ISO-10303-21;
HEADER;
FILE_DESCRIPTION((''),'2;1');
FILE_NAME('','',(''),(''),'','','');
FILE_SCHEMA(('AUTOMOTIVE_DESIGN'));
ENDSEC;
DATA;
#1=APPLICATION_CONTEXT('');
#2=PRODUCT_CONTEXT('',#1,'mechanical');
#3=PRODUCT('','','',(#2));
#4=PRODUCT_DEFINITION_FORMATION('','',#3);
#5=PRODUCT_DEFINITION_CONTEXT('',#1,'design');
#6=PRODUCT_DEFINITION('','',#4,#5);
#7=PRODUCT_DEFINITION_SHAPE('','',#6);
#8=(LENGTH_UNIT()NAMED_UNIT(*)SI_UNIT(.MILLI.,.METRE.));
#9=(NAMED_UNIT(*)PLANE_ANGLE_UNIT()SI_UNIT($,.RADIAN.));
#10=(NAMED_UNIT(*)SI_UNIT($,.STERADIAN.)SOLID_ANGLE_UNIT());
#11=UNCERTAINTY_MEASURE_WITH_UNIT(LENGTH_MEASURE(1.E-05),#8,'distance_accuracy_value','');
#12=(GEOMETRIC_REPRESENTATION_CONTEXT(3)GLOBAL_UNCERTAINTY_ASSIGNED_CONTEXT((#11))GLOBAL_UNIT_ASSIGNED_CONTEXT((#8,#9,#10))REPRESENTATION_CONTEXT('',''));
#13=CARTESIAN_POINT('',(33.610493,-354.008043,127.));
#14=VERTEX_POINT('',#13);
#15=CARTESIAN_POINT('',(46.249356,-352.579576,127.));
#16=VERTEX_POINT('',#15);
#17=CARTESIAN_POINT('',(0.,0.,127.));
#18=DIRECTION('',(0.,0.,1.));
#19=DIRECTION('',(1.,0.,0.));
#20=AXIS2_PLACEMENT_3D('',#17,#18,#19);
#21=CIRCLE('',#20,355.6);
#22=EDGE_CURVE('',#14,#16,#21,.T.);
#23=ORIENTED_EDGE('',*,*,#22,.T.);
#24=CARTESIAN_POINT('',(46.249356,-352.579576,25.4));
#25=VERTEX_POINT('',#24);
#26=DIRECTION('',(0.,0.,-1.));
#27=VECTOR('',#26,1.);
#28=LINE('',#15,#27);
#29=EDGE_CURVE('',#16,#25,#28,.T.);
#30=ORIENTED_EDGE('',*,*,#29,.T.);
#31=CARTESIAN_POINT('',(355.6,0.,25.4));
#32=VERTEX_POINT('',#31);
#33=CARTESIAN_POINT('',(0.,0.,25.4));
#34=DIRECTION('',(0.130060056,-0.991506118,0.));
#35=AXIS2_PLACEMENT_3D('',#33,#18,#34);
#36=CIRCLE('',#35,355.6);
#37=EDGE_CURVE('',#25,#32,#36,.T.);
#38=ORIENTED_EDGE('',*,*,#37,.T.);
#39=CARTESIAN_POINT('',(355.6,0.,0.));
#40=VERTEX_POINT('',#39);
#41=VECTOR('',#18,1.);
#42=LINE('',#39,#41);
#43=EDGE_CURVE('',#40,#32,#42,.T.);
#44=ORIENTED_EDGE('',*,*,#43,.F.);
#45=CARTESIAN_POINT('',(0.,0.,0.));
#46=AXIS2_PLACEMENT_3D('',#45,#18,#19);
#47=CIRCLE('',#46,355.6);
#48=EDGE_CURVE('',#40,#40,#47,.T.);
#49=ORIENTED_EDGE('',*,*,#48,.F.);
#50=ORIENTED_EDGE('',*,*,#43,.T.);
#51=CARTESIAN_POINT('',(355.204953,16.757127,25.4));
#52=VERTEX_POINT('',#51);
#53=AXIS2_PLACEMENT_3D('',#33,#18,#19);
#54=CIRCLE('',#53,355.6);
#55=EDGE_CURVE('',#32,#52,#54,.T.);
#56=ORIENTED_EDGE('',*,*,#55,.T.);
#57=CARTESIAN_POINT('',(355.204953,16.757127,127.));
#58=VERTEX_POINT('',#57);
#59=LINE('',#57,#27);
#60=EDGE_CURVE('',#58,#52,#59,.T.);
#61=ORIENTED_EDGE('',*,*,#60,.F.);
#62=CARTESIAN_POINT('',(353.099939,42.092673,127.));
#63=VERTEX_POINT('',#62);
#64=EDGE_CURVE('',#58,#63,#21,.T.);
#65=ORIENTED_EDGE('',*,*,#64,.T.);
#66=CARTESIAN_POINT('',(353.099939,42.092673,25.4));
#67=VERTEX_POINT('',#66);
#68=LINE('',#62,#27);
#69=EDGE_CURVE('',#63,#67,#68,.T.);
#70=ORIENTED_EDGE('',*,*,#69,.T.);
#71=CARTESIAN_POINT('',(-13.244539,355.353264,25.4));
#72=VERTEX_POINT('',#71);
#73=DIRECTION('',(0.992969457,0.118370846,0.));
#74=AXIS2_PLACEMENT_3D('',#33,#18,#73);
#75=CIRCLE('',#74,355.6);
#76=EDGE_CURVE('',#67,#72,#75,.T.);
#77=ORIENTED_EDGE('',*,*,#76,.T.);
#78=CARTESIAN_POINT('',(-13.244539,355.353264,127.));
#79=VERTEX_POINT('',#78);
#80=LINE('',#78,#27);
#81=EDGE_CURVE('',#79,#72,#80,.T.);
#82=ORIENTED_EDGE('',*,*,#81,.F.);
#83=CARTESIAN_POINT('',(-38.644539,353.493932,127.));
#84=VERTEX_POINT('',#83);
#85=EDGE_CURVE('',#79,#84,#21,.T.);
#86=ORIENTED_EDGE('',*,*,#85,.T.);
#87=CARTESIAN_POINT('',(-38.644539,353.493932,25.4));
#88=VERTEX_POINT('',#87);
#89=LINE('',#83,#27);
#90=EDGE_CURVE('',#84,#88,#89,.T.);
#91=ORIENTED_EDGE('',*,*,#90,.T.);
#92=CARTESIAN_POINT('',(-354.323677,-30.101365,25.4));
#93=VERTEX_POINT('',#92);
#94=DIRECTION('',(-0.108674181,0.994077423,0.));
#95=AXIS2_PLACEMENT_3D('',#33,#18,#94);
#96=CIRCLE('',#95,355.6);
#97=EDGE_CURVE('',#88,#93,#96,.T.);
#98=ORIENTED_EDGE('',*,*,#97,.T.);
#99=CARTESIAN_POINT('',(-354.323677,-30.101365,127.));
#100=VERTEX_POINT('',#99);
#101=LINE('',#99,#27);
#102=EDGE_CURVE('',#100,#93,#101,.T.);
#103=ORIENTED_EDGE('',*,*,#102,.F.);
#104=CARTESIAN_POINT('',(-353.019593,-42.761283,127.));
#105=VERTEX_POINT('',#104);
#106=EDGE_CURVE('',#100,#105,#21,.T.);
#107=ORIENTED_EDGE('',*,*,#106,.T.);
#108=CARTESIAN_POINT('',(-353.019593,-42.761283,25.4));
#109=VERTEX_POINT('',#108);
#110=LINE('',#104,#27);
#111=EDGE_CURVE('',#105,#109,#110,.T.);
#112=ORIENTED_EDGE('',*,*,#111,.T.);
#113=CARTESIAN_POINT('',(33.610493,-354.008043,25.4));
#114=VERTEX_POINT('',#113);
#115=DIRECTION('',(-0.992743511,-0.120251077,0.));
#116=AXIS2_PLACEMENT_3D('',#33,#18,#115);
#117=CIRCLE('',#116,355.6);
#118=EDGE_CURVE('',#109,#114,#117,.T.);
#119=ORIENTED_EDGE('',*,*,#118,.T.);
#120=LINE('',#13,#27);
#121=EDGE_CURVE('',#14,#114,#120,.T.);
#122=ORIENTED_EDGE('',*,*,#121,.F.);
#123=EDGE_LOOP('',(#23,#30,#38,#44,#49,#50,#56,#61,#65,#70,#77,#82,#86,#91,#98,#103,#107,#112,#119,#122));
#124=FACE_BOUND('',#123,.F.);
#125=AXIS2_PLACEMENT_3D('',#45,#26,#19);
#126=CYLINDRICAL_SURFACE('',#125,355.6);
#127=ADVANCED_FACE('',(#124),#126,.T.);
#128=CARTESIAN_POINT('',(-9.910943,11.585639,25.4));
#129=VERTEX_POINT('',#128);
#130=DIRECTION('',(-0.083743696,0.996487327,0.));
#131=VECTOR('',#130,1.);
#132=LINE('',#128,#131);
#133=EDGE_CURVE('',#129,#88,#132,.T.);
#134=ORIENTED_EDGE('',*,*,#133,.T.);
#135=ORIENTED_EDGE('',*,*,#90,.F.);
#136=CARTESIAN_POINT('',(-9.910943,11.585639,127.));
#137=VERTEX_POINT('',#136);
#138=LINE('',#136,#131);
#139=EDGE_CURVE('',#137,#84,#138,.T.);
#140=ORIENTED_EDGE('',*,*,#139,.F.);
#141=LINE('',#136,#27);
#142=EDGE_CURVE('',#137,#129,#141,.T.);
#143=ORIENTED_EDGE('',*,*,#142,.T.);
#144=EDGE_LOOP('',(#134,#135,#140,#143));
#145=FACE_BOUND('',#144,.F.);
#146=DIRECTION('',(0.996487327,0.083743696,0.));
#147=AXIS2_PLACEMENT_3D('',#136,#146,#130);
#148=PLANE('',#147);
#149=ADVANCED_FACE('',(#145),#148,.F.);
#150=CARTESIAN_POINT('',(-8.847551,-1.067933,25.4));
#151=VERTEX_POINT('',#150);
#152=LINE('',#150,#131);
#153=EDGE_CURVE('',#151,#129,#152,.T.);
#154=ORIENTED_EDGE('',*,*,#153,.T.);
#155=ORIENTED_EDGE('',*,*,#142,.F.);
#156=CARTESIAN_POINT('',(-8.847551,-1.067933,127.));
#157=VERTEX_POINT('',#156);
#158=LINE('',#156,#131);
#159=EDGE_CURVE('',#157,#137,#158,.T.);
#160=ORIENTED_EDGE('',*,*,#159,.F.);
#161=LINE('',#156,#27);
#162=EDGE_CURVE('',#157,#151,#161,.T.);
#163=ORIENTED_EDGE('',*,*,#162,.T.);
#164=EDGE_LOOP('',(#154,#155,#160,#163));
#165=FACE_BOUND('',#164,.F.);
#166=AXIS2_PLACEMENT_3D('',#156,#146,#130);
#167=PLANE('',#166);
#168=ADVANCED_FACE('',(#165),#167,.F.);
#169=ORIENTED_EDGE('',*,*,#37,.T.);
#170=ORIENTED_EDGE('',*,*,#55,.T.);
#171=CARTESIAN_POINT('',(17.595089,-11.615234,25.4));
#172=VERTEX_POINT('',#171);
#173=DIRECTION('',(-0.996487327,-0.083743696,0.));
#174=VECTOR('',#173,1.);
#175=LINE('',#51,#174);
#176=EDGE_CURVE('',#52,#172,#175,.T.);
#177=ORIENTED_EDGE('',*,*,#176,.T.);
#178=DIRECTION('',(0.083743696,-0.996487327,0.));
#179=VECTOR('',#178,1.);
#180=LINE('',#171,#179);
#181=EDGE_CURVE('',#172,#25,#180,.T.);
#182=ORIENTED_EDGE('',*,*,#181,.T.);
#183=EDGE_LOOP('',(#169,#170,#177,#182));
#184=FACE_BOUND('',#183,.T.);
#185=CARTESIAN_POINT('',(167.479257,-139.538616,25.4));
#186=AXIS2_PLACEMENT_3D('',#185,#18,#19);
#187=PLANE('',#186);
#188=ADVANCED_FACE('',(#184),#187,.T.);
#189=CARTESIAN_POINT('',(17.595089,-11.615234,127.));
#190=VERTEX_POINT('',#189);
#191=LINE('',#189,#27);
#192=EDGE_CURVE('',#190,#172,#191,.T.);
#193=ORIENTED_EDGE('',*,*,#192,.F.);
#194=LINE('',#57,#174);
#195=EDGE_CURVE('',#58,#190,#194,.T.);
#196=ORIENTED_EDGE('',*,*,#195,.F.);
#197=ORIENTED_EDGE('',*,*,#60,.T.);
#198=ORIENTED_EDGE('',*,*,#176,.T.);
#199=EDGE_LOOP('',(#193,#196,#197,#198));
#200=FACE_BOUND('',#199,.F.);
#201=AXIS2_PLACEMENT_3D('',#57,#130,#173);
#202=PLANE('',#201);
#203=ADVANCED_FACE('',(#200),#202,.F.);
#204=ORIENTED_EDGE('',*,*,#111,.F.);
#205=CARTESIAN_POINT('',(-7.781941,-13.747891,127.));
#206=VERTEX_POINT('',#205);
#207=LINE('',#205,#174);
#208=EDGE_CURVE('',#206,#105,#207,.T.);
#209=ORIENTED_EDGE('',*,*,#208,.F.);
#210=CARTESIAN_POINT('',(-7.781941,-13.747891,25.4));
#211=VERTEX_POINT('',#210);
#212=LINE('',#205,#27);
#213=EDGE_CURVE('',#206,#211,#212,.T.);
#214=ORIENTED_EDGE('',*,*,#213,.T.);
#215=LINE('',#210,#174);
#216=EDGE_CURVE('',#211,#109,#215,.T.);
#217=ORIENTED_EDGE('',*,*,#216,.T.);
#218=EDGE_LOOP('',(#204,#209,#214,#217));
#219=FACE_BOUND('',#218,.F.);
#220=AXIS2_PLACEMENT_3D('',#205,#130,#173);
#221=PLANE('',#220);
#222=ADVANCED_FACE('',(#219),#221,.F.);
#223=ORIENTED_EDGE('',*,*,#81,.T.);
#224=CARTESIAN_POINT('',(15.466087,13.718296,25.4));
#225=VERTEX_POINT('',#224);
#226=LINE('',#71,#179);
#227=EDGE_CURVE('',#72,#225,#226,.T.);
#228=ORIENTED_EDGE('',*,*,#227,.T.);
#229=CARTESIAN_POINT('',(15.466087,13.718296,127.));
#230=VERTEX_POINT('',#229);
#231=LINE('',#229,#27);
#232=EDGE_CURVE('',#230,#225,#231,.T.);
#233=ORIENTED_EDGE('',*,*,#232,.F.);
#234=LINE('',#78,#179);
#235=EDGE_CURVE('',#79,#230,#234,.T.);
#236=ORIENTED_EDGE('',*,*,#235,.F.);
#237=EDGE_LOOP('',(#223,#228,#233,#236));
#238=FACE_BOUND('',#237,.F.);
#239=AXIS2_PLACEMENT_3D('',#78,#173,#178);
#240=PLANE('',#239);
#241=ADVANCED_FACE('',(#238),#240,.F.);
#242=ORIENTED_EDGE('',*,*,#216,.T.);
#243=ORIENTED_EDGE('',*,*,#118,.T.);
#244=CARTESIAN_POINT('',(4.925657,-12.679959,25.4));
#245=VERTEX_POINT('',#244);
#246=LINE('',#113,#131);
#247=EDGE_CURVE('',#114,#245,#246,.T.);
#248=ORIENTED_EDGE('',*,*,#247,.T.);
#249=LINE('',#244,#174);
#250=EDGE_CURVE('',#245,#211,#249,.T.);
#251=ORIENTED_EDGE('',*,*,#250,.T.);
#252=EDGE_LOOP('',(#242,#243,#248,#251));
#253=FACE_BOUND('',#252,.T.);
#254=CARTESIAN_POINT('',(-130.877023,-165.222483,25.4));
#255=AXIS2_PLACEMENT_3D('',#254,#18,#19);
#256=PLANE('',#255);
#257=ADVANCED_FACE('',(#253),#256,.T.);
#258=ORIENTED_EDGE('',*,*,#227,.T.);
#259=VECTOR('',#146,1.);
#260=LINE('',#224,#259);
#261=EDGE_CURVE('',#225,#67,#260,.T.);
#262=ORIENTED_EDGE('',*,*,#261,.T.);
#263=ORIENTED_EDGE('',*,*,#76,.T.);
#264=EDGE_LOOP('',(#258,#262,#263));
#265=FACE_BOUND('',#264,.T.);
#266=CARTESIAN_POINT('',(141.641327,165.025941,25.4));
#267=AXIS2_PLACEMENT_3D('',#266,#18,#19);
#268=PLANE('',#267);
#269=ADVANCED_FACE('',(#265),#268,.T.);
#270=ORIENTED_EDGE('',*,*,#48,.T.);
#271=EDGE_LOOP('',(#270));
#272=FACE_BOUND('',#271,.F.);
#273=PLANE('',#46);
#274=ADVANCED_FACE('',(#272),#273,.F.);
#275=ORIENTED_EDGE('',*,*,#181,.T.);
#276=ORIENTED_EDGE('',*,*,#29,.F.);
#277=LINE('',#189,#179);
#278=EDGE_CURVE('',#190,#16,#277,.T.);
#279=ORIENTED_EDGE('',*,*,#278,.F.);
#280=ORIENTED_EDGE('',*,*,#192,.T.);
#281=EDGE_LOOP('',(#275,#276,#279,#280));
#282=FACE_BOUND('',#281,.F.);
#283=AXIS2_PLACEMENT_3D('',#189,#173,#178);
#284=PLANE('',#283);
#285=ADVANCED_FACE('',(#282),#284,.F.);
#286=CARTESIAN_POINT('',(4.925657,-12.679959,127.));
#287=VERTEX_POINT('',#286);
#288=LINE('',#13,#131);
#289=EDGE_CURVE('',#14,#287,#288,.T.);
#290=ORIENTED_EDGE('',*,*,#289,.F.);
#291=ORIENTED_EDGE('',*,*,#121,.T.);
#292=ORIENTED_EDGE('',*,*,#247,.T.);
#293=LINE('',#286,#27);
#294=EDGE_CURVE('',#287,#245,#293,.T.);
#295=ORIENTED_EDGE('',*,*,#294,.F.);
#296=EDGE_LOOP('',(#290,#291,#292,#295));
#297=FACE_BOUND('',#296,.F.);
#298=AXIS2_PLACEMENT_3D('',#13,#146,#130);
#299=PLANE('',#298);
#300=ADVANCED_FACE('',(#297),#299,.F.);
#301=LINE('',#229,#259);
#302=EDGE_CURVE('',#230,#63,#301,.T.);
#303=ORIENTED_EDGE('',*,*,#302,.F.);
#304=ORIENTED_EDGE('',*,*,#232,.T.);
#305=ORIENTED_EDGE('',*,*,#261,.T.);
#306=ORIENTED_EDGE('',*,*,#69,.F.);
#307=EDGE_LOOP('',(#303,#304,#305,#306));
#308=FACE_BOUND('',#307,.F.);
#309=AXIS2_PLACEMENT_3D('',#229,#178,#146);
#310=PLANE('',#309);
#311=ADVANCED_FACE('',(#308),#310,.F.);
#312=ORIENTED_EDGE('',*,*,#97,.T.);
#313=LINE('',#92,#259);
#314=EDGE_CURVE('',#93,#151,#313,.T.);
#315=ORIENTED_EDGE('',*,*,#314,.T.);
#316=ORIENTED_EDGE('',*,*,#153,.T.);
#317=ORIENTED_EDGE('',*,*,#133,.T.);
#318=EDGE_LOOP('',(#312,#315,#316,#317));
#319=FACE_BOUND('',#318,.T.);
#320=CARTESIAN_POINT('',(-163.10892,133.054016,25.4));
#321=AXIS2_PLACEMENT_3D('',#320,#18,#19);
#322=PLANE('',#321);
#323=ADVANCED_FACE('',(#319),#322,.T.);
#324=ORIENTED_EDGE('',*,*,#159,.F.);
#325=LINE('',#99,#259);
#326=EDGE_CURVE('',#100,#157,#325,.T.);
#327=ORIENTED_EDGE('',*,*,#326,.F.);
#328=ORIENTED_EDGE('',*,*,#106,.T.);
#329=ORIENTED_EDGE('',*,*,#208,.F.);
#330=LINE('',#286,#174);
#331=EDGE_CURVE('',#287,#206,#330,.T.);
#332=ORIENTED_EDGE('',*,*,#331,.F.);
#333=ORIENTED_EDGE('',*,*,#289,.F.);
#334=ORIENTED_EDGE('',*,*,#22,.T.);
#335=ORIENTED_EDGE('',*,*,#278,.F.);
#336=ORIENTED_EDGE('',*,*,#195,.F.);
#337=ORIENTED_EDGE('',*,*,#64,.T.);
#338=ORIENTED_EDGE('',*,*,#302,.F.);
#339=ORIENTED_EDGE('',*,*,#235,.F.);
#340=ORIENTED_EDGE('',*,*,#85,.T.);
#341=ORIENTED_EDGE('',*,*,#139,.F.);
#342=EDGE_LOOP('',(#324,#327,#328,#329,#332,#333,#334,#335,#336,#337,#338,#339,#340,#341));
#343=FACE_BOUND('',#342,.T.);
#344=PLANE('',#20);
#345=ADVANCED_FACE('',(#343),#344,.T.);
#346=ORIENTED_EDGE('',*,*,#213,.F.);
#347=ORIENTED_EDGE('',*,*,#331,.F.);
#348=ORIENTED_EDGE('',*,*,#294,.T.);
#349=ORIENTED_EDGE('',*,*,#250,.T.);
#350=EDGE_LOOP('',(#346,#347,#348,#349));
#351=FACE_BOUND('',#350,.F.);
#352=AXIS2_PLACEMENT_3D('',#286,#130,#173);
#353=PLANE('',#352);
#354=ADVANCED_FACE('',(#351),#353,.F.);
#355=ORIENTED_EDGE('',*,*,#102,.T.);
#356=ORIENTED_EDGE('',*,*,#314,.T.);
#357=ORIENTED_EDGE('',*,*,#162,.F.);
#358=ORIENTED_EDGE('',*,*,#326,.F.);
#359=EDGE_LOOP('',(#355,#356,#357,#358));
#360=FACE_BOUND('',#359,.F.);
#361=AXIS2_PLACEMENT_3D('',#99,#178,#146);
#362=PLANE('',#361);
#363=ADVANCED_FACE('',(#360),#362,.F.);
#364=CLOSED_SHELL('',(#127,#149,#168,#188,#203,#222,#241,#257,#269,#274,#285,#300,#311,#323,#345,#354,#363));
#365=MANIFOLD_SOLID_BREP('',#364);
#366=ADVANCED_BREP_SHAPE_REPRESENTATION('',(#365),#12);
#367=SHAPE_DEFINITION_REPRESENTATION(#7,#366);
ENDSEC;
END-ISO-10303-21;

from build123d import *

# Parameters (mm, degrees)
F0_R     = 355.6
F1_DEPTH = 127
F3_DEPTH = 101.6


with BuildPart() as f1:
    # F0 (on Top) → F1 (new body)
    with BuildSketch(Plane.XY):
        Circle(F0_R)
    extrude(amount=F1_DEPTH)

    # F2 (on face) → F3 (cut)
    with BuildSketch(Plane.XY.offset(127)):
        with BuildLine():
            ThreePointArc((353.0999389591, 42.0926728434), (231.1027319808, 270.2644765244), (-13.2445388494, 355.353263937))
            Line((-13.2445388494, 355.353263937), (15.4660869459, 13.7182963842))
            Line((15.4660869459, 13.7182963842), (353.0999389591, 42.0926728434))
        make_face()
        with BuildLine():
            Line((-9.9109431068, 11.5856387734), (-38.6445388494, 353.4939315139))
            ThreePointArc((-38.6445388494, 353.4939315139), (-274.5766604834, 225.962425013), (-354.3236766316, -30.1013650562))
            Line((-354.3236766316, -30.1013650562), (-8.8475509302, -1.0679325675))
            Line((-8.8475509302, -1.0679325675), (-9.9109431068, 11.5856387734))
        make_face()
        with BuildLine():
            Line((33.6104931009, -354.0080433458), (4.9256574214, -12.679958877))
            Line((4.9256574214, -12.679958877), (-7.7819411742, -13.7478914444))
            Line((-7.7819411742, -13.7478914444), (-353.0195925051, -42.7612828101))
            ThreePointArc((-353.0195925051, -42.7612828101), (-222.9891918492, -276.9967153568), (33.6104931009, -354.0080433458))
        make_face()
        with BuildLine():
            Line((355.2049530963, 16.7571267176), (17.5950888785, -11.6152338337))
            Line((17.5950888785, -11.6152338337), (46.2493560151, -352.5795755119))
            ThreePointArc((46.2493560152, -352.5795755119), (267.2991124181, -234.5262128217), (355.6, 0))
            ThreePointArc((355.6, 0), (355.5012245556, 8.3808913292), (355.2049530963, 16.7571267176))
        make_face()
    extrude(amount=-F3_DEPTH, mode=Mode.SUBTRACT)


solid = f1.part
